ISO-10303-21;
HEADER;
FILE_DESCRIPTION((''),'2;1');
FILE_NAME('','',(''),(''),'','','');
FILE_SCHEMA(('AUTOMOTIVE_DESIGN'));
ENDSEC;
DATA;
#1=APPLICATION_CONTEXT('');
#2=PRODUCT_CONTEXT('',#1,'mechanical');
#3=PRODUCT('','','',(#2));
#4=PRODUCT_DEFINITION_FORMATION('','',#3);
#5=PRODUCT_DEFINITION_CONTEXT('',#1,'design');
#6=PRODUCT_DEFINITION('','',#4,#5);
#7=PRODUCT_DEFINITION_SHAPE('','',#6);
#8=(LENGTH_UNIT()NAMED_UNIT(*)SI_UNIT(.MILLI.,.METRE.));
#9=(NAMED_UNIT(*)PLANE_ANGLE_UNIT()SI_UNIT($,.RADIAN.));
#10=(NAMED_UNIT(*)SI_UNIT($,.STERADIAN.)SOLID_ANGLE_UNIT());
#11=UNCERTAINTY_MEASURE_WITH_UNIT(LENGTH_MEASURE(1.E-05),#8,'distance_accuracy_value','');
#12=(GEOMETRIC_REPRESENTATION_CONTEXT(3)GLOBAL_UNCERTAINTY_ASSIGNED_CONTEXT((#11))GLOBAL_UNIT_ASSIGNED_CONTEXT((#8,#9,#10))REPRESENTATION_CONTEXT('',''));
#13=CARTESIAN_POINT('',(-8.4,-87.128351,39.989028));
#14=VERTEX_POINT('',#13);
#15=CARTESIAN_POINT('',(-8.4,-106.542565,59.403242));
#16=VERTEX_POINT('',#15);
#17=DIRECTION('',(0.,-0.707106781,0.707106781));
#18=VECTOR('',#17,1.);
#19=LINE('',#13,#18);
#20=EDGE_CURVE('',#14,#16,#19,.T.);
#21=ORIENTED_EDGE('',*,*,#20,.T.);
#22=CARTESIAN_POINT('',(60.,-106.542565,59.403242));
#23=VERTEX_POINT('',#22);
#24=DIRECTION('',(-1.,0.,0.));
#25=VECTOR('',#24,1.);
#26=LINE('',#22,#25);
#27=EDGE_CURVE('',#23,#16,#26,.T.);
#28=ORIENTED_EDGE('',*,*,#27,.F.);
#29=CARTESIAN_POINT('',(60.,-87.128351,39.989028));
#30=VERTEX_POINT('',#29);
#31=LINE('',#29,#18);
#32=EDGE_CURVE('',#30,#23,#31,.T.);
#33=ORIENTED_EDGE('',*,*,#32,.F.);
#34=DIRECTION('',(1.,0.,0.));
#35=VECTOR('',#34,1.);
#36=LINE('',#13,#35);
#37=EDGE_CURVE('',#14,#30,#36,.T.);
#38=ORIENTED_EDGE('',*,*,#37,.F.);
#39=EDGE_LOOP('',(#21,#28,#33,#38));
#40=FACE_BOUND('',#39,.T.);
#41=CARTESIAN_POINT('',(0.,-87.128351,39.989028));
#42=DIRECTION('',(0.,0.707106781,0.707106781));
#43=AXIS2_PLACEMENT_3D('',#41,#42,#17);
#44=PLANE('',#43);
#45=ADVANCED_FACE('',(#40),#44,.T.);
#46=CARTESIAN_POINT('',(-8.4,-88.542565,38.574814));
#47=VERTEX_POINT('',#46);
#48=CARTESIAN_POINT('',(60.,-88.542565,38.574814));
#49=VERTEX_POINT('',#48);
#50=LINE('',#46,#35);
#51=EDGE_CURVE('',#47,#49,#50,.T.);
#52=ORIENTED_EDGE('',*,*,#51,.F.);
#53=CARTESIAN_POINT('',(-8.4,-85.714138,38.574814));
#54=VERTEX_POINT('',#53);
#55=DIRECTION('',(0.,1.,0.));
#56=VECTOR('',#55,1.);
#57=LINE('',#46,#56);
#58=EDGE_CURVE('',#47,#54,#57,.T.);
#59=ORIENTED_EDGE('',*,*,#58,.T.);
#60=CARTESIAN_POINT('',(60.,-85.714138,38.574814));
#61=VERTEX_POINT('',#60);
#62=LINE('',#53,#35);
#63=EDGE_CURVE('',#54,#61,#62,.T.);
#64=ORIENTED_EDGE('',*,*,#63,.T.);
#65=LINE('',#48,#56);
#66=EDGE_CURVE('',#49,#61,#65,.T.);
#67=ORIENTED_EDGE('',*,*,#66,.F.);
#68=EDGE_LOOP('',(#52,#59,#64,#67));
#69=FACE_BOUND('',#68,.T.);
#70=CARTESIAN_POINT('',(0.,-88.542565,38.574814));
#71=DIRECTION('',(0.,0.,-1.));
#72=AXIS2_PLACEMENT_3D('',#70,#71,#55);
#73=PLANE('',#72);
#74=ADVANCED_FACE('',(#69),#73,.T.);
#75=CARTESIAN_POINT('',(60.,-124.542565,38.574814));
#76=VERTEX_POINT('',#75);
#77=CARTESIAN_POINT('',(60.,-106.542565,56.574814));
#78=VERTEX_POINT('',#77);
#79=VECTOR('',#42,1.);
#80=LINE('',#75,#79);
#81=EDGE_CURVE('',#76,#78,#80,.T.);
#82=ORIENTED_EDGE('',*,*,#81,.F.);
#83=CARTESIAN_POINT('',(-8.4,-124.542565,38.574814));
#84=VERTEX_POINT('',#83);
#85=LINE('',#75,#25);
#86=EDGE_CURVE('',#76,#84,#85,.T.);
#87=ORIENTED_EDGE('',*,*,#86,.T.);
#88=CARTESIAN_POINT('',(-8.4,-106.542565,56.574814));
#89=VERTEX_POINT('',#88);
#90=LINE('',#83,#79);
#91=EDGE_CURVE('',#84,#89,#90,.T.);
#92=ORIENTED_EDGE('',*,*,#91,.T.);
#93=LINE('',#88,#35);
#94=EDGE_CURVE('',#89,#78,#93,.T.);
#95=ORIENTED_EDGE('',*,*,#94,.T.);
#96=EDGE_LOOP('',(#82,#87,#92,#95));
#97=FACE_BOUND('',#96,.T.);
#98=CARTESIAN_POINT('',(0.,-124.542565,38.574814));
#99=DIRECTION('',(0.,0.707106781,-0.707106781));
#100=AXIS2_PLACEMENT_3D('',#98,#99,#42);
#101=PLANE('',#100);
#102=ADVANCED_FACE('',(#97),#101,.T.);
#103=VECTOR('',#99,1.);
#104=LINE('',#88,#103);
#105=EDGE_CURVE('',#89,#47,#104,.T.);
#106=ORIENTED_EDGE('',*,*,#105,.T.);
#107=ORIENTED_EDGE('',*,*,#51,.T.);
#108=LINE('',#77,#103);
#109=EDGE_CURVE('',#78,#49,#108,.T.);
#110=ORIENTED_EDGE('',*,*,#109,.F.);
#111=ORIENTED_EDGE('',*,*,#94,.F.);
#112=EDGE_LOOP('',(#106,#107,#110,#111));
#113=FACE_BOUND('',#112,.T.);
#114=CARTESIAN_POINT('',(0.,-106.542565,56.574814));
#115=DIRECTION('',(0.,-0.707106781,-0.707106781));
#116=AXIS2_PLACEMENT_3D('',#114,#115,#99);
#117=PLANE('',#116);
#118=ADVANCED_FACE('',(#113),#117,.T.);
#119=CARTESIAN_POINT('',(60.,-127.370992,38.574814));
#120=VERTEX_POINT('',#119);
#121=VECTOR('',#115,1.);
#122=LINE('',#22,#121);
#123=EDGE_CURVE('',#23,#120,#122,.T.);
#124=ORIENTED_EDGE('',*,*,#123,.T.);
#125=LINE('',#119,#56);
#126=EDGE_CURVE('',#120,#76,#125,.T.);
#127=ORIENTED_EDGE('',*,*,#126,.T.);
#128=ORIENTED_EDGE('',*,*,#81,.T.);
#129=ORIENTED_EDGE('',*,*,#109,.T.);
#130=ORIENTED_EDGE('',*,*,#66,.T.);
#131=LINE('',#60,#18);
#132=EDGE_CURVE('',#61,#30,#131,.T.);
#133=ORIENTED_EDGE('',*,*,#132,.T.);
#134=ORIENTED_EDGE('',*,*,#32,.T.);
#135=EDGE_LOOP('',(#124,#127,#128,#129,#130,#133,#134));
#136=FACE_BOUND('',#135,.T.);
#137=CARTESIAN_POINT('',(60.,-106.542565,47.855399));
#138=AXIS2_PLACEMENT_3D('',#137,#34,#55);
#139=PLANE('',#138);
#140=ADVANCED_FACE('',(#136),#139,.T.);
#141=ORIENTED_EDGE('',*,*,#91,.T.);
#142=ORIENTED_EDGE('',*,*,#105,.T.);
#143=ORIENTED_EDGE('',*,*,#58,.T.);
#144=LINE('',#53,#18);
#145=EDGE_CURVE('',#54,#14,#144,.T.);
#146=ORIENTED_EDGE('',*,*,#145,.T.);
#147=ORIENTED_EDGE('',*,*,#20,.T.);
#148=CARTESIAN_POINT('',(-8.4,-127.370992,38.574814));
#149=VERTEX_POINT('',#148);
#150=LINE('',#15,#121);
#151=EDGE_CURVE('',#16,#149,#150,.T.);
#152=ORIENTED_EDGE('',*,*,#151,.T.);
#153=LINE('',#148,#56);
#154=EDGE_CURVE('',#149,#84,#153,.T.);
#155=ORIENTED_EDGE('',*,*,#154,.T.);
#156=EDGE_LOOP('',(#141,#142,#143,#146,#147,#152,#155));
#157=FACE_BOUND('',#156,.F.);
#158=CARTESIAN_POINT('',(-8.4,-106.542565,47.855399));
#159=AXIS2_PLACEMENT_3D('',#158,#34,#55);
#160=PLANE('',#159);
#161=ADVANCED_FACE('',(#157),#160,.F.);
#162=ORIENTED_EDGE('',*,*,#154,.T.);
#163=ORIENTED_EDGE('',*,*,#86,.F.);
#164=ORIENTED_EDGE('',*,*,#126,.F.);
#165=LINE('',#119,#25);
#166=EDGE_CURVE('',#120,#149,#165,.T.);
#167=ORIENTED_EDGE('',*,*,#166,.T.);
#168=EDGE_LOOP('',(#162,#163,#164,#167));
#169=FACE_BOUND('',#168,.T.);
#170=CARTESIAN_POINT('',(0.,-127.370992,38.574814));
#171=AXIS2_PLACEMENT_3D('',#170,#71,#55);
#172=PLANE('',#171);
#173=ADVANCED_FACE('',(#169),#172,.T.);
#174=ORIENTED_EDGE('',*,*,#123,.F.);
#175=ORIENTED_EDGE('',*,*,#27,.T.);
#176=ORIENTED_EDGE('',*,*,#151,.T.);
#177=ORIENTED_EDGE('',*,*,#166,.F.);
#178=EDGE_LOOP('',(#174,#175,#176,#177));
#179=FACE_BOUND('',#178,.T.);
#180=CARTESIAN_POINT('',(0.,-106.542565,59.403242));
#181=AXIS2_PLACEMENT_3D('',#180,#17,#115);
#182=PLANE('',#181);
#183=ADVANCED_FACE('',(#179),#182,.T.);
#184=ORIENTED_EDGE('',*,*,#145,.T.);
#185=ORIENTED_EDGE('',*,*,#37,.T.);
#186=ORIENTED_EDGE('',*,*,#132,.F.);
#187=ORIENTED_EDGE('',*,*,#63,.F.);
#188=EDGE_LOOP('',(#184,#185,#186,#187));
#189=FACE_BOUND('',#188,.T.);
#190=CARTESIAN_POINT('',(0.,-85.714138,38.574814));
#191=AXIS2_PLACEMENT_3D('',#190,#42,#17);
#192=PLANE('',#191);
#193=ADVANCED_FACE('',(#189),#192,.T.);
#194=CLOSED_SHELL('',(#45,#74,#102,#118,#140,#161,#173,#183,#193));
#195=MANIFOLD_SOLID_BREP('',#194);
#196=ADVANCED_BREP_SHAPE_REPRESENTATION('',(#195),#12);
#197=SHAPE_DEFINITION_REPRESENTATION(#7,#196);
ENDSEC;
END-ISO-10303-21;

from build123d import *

# Parameters (mm, degrees)
F1_DEPTH = 60
F2_DEPTH = 8.4


with BuildPart() as f1:
    # F0 (on Right) → F1 (new body)
    with BuildSketch(Plane.YZ):
        Polygon((-124.5425649285, 38.5748143829), (-106.5425649285, 56.5748143829), (-88.5425649285, 38.5748143829), (-85.7141378038, 38.5748143829), (-87.1283513662, 39.9890279453), (-106.5425649285, 59.4032415077), (-125.9567784909, 39.9890279453), (-127.3709920533, 38.5748143829), align=None)
    extrude(amount=F1_DEPTH)

    # F2 (add): a face of the model
    f2_faces = [f1.faces().sort_by_distance(p)[0] for p in [
        (0, -125.9567784909, 39.0405521721),
    ]]
    extrude(f2_faces, amount=F2_DEPTH)


solid = f1.part
